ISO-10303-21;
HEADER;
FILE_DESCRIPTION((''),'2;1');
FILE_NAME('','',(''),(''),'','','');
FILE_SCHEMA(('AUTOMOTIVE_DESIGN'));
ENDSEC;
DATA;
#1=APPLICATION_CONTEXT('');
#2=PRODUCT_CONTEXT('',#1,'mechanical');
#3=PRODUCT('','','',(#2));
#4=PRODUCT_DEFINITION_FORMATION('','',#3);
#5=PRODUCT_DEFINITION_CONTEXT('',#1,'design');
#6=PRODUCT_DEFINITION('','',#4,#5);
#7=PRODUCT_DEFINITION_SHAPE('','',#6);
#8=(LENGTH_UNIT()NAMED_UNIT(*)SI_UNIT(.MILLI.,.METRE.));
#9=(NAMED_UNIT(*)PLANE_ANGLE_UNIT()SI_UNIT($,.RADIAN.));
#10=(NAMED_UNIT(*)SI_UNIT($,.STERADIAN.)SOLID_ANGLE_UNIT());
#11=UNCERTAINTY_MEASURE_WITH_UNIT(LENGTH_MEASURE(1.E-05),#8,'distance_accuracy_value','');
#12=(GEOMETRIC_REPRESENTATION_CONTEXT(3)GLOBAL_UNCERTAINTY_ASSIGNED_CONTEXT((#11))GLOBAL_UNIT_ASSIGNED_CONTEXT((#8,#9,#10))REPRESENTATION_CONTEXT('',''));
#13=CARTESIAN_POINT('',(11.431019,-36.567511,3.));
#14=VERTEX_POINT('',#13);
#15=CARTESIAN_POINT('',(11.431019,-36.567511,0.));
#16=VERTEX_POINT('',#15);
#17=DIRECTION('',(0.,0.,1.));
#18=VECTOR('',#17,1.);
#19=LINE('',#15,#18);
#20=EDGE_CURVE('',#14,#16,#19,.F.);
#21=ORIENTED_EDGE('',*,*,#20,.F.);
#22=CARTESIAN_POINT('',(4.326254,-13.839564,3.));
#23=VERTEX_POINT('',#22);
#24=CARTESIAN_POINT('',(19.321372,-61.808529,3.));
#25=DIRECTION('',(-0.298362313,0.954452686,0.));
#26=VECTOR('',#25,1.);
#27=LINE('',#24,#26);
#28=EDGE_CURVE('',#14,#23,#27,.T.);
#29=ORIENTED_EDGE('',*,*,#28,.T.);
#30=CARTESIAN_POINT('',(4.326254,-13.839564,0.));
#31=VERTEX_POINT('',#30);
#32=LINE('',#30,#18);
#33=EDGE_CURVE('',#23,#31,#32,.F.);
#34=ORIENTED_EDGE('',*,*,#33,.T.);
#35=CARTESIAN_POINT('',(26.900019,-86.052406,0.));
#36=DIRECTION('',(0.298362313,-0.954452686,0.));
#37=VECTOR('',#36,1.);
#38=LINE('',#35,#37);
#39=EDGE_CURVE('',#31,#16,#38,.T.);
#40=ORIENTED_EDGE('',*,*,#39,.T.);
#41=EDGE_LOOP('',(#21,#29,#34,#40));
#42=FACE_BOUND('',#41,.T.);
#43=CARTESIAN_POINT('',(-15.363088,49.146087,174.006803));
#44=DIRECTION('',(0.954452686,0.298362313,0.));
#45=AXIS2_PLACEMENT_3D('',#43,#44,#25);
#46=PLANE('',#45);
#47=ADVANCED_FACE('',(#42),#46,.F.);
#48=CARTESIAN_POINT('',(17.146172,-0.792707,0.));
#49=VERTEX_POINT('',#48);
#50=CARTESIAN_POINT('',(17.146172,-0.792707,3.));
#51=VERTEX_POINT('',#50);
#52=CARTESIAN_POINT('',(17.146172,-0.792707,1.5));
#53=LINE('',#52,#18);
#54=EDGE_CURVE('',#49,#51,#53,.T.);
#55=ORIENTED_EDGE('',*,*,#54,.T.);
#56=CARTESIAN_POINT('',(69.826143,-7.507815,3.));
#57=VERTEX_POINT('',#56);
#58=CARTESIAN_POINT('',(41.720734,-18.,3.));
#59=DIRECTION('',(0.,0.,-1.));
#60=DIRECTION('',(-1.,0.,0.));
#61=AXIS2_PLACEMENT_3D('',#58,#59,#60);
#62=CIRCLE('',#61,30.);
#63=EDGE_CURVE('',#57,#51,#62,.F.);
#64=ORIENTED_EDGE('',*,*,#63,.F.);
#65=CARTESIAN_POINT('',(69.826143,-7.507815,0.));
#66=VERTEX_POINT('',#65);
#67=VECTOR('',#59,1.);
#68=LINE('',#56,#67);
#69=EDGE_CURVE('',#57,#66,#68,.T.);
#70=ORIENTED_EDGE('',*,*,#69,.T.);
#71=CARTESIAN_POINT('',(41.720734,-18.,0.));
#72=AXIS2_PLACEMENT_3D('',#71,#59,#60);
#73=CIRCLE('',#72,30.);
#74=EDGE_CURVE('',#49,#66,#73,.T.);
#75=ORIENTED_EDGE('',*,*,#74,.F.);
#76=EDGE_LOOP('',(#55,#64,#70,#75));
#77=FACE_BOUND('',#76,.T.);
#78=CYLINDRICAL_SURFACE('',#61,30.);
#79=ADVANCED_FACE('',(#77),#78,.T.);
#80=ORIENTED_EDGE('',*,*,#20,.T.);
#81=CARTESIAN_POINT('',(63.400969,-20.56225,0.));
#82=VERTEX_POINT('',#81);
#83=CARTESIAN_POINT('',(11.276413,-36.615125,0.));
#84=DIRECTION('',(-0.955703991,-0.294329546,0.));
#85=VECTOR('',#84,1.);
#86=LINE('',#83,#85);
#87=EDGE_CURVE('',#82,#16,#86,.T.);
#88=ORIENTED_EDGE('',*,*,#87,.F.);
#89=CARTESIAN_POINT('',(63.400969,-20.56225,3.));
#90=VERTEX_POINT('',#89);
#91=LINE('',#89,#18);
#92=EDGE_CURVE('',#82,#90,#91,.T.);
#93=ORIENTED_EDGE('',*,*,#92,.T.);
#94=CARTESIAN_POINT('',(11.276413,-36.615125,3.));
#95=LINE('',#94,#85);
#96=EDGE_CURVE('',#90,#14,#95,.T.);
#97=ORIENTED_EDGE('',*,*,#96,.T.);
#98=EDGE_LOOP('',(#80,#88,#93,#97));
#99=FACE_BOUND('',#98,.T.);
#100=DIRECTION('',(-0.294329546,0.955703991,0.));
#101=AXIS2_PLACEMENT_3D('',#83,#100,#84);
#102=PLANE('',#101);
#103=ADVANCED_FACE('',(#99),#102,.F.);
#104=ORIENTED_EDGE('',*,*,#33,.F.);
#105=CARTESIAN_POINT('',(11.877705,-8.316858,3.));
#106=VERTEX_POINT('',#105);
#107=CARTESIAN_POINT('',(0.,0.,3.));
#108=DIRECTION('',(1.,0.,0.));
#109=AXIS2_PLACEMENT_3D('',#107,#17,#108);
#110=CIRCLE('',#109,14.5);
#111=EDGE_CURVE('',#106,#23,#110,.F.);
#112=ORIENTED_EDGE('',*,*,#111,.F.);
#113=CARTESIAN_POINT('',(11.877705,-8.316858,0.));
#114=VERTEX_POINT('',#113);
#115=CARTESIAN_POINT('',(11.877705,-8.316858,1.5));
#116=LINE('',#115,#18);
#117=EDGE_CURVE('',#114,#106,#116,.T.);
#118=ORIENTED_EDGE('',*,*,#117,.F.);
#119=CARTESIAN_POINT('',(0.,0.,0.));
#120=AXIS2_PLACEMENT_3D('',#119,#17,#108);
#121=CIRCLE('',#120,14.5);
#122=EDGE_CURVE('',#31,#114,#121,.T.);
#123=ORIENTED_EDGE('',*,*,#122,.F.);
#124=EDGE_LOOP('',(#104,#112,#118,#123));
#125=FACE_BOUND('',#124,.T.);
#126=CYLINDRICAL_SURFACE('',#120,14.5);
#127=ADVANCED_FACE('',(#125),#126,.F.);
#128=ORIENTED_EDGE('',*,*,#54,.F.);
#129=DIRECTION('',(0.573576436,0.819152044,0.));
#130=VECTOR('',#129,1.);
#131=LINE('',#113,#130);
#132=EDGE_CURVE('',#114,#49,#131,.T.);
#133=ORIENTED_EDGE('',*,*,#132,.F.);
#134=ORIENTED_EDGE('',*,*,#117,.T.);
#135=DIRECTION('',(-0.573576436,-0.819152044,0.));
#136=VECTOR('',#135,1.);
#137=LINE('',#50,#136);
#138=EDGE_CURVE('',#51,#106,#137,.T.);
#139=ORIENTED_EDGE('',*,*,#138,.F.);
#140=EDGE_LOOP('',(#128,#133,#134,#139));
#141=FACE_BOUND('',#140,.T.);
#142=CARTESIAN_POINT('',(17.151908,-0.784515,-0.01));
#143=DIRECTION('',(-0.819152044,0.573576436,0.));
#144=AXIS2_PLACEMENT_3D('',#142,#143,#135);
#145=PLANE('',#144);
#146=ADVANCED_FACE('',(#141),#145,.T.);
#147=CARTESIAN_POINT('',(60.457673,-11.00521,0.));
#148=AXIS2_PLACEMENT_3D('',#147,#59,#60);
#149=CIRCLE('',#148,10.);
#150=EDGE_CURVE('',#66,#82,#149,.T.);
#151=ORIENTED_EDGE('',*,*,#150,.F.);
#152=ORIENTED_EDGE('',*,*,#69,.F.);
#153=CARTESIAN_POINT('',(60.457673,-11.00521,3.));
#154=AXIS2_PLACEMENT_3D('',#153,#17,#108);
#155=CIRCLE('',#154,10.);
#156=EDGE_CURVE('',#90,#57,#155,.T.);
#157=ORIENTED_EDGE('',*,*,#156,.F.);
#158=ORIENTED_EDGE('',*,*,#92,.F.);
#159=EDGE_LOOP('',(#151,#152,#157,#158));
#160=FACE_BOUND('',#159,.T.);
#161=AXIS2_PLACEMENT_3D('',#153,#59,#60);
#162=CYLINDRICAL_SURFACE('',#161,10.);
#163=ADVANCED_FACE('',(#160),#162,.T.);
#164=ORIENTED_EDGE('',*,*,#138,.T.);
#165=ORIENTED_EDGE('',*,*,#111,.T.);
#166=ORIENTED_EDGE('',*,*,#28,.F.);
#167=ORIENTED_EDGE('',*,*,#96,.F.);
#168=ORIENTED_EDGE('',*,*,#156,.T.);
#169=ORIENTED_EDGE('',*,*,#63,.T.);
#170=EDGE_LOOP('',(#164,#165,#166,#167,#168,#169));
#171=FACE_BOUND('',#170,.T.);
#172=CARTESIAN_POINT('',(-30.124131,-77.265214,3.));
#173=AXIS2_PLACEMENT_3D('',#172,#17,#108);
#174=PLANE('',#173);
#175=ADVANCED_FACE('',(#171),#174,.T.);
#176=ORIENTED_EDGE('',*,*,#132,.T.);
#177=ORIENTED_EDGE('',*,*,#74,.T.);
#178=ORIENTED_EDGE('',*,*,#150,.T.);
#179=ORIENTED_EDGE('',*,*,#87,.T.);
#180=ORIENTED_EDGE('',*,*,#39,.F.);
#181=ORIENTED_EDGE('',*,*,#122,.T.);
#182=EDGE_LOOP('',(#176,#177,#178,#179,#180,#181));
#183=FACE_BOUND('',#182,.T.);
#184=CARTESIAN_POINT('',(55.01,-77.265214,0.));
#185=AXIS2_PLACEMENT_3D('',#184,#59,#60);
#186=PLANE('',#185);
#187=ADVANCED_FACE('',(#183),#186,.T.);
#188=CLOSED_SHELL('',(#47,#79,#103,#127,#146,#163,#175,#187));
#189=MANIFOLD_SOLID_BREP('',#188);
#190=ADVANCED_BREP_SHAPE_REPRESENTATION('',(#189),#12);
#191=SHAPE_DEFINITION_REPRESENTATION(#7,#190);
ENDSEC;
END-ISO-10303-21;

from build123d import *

# Parameters (mm, degrees)
BOSS_EXTRUDE1_START     = -3
BOSS_EXTRUDE1_OUTLINE_R = 2.5
BOSS_EXTRUDE1_DEPTH     = 3
FILLET1_R               = 10
BOSS_EXTRUDE2_START     = -3
BOSS_EXTRUDE2_DEPTH     = 3
CUT_EXTRUDE1_START      = -3
CUT_EXTRUDE1_DEPTH      = 3
FILLET2_R               = 10
CUT_EXTRUDE2_DEPTH      = 103.947966144
CUT_EXTRUDE2_DEPTH_BACK = 103.947966144


with BuildPart() as part:
    # Boss-Extrude1: read off the stored shape, not the designer's step
    # Boss-Extrude1 outline → Boss-Extrude1 (new body)
    with BuildSketch(Plane.XY.offset(3).offset(BOSS_EXTRUDE1_START)):
        with BuildLine():
            ThreePointArc((-24.364065342, 16.876742294), (-25.101814907, 17.696096192), (-26.161653435, 18))
            Line((-26.161653435, 18), (-27.830556346, 18))
            ThreePointArc((-27.830556346, 18), (-29.526652538, 17.059838528), (-29.628144438, 15.123257706))
            Line((-29.628144438, 15.123257706), (-16.550964109, -11.68893536))
            ThreePointArc((-16.550964109, -11.68893536), (-15.603505287, -14.937815984), (-15.793938159, -18.316667689))
            Line((-15.793938159, -18.316667689), (-24.617449619, -56.633968709))
            ThreePointArc((-24.617449619, -56.633968709), (-12.550978841, -74.781492041), (4.900124379, -61.728089553))
            Line((4.900124379, -61.728089553), (7.520756747, -39.132184047))
            Line((7.520756747, -39.132184047), (57.484416951, -6.361887987))
            ThreePointArc((57.484416951, -6.361887987), (61.581724267, 4.861915454), (52, 12))
            Line((52, 12), (41.720733512, 12))
            ThreePointArc((41.720733512, 12), (27.868275115, 8.610324995), (17.146172183, -0.792706909))
            Line((17.146172183, -0.792706909), (11.877704642, -8.316858327))
            ThreePointArc((11.877704642, -8.316858327), (-1.137656888, -14.455301339), (-13.032513671, -6.356381628))
            Line((-13.032513671, -6.356381628), (-24.364065342, 16.876742294))
        make_face()
        with Locations((-10, -60)):
            Circle(BOSS_EXTRUDE1_OUTLINE_R, mode=Mode.SUBTRACT)
    extrude(amount=BOSS_EXTRUDE1_DEPTH)

    # Fillet1
    fillet1_edges = [part.edges().sort_by_distance(p)[0] for p in [
        (7.520756747, -39.132184047, 1.5),
    ]]
    fillet(fillet1_edges, radius=FILLET1_R)

    # Sketch2 → Boss-Extrude2 (add)
    with BuildSketch(Plane.XY.offset(3).offset(BOSS_EXTRUDE2_START)):
        with BuildLine():
            Line((11.431019345, -36.567510792), (71.720733512, -18))
            ThreePointArc((71.720733512, -18), (69.105682696, -5.749915992), (61.716429632, 4.364528537))
            ThreePointArc((61.716429632, 4.364528537), (61.302173782, -1.670090316), (57.484416951, -6.361887987))
            Line((57.484416951, -6.361887987), (11.431019345, -36.567510792))
        make_face()
    extrude(amount=BOSS_EXTRUDE2_DEPTH)

    # Sketch2<4> → Cut-Extrude1 (cut)
    with BuildSketch(Plane.XY.offset(3).offset(CUT_EXTRUDE1_START)):
        with BuildLine():
            ThreePointArc((41.720733512, 12), (52.42269931, 10.026200742), (61.716429632, 4.364528537))
            ThreePointArc((61.716429632, 4.364528537), (58.178782835, 9.862737607), (52, 12))
            Line((52, 12), (41.720733512, 12))
        make_face()
    extrude(amount=CUT_EXTRUDE1_DEPTH, mode=Mode.SUBTRACT)

    # Fillet2
    fillet2_edges = [part.edges().sort_by_distance(p)[0] for p in [
        (71.720733512, -18, 1.5),
    ]]
    fillet(fillet2_edges, radius=FILLET2_R)

    # Sketch3 → Cut-Extrude2 (cut, two sides: drawn at the far end of the back side and taken through both)
    with BuildSketch(Plane.XY.offset(3).offset(-CUT_EXTRUDE2_DEPTH_BACK)):
        Polygon((-108.405592733, 346.786455555), (-15.36308768, 49.146087288), (29.942477709, -95.785147736), (122.984982762, -393.425516003), (-472.295753771, -579.510526109), (-703.686329267, 160.701445449), align=None)
    extrude(amount=CUT_EXTRUDE2_DEPTH + CUT_EXTRUDE2_DEPTH_BACK, mode=Mode.SUBTRACT)


solid = part.part
